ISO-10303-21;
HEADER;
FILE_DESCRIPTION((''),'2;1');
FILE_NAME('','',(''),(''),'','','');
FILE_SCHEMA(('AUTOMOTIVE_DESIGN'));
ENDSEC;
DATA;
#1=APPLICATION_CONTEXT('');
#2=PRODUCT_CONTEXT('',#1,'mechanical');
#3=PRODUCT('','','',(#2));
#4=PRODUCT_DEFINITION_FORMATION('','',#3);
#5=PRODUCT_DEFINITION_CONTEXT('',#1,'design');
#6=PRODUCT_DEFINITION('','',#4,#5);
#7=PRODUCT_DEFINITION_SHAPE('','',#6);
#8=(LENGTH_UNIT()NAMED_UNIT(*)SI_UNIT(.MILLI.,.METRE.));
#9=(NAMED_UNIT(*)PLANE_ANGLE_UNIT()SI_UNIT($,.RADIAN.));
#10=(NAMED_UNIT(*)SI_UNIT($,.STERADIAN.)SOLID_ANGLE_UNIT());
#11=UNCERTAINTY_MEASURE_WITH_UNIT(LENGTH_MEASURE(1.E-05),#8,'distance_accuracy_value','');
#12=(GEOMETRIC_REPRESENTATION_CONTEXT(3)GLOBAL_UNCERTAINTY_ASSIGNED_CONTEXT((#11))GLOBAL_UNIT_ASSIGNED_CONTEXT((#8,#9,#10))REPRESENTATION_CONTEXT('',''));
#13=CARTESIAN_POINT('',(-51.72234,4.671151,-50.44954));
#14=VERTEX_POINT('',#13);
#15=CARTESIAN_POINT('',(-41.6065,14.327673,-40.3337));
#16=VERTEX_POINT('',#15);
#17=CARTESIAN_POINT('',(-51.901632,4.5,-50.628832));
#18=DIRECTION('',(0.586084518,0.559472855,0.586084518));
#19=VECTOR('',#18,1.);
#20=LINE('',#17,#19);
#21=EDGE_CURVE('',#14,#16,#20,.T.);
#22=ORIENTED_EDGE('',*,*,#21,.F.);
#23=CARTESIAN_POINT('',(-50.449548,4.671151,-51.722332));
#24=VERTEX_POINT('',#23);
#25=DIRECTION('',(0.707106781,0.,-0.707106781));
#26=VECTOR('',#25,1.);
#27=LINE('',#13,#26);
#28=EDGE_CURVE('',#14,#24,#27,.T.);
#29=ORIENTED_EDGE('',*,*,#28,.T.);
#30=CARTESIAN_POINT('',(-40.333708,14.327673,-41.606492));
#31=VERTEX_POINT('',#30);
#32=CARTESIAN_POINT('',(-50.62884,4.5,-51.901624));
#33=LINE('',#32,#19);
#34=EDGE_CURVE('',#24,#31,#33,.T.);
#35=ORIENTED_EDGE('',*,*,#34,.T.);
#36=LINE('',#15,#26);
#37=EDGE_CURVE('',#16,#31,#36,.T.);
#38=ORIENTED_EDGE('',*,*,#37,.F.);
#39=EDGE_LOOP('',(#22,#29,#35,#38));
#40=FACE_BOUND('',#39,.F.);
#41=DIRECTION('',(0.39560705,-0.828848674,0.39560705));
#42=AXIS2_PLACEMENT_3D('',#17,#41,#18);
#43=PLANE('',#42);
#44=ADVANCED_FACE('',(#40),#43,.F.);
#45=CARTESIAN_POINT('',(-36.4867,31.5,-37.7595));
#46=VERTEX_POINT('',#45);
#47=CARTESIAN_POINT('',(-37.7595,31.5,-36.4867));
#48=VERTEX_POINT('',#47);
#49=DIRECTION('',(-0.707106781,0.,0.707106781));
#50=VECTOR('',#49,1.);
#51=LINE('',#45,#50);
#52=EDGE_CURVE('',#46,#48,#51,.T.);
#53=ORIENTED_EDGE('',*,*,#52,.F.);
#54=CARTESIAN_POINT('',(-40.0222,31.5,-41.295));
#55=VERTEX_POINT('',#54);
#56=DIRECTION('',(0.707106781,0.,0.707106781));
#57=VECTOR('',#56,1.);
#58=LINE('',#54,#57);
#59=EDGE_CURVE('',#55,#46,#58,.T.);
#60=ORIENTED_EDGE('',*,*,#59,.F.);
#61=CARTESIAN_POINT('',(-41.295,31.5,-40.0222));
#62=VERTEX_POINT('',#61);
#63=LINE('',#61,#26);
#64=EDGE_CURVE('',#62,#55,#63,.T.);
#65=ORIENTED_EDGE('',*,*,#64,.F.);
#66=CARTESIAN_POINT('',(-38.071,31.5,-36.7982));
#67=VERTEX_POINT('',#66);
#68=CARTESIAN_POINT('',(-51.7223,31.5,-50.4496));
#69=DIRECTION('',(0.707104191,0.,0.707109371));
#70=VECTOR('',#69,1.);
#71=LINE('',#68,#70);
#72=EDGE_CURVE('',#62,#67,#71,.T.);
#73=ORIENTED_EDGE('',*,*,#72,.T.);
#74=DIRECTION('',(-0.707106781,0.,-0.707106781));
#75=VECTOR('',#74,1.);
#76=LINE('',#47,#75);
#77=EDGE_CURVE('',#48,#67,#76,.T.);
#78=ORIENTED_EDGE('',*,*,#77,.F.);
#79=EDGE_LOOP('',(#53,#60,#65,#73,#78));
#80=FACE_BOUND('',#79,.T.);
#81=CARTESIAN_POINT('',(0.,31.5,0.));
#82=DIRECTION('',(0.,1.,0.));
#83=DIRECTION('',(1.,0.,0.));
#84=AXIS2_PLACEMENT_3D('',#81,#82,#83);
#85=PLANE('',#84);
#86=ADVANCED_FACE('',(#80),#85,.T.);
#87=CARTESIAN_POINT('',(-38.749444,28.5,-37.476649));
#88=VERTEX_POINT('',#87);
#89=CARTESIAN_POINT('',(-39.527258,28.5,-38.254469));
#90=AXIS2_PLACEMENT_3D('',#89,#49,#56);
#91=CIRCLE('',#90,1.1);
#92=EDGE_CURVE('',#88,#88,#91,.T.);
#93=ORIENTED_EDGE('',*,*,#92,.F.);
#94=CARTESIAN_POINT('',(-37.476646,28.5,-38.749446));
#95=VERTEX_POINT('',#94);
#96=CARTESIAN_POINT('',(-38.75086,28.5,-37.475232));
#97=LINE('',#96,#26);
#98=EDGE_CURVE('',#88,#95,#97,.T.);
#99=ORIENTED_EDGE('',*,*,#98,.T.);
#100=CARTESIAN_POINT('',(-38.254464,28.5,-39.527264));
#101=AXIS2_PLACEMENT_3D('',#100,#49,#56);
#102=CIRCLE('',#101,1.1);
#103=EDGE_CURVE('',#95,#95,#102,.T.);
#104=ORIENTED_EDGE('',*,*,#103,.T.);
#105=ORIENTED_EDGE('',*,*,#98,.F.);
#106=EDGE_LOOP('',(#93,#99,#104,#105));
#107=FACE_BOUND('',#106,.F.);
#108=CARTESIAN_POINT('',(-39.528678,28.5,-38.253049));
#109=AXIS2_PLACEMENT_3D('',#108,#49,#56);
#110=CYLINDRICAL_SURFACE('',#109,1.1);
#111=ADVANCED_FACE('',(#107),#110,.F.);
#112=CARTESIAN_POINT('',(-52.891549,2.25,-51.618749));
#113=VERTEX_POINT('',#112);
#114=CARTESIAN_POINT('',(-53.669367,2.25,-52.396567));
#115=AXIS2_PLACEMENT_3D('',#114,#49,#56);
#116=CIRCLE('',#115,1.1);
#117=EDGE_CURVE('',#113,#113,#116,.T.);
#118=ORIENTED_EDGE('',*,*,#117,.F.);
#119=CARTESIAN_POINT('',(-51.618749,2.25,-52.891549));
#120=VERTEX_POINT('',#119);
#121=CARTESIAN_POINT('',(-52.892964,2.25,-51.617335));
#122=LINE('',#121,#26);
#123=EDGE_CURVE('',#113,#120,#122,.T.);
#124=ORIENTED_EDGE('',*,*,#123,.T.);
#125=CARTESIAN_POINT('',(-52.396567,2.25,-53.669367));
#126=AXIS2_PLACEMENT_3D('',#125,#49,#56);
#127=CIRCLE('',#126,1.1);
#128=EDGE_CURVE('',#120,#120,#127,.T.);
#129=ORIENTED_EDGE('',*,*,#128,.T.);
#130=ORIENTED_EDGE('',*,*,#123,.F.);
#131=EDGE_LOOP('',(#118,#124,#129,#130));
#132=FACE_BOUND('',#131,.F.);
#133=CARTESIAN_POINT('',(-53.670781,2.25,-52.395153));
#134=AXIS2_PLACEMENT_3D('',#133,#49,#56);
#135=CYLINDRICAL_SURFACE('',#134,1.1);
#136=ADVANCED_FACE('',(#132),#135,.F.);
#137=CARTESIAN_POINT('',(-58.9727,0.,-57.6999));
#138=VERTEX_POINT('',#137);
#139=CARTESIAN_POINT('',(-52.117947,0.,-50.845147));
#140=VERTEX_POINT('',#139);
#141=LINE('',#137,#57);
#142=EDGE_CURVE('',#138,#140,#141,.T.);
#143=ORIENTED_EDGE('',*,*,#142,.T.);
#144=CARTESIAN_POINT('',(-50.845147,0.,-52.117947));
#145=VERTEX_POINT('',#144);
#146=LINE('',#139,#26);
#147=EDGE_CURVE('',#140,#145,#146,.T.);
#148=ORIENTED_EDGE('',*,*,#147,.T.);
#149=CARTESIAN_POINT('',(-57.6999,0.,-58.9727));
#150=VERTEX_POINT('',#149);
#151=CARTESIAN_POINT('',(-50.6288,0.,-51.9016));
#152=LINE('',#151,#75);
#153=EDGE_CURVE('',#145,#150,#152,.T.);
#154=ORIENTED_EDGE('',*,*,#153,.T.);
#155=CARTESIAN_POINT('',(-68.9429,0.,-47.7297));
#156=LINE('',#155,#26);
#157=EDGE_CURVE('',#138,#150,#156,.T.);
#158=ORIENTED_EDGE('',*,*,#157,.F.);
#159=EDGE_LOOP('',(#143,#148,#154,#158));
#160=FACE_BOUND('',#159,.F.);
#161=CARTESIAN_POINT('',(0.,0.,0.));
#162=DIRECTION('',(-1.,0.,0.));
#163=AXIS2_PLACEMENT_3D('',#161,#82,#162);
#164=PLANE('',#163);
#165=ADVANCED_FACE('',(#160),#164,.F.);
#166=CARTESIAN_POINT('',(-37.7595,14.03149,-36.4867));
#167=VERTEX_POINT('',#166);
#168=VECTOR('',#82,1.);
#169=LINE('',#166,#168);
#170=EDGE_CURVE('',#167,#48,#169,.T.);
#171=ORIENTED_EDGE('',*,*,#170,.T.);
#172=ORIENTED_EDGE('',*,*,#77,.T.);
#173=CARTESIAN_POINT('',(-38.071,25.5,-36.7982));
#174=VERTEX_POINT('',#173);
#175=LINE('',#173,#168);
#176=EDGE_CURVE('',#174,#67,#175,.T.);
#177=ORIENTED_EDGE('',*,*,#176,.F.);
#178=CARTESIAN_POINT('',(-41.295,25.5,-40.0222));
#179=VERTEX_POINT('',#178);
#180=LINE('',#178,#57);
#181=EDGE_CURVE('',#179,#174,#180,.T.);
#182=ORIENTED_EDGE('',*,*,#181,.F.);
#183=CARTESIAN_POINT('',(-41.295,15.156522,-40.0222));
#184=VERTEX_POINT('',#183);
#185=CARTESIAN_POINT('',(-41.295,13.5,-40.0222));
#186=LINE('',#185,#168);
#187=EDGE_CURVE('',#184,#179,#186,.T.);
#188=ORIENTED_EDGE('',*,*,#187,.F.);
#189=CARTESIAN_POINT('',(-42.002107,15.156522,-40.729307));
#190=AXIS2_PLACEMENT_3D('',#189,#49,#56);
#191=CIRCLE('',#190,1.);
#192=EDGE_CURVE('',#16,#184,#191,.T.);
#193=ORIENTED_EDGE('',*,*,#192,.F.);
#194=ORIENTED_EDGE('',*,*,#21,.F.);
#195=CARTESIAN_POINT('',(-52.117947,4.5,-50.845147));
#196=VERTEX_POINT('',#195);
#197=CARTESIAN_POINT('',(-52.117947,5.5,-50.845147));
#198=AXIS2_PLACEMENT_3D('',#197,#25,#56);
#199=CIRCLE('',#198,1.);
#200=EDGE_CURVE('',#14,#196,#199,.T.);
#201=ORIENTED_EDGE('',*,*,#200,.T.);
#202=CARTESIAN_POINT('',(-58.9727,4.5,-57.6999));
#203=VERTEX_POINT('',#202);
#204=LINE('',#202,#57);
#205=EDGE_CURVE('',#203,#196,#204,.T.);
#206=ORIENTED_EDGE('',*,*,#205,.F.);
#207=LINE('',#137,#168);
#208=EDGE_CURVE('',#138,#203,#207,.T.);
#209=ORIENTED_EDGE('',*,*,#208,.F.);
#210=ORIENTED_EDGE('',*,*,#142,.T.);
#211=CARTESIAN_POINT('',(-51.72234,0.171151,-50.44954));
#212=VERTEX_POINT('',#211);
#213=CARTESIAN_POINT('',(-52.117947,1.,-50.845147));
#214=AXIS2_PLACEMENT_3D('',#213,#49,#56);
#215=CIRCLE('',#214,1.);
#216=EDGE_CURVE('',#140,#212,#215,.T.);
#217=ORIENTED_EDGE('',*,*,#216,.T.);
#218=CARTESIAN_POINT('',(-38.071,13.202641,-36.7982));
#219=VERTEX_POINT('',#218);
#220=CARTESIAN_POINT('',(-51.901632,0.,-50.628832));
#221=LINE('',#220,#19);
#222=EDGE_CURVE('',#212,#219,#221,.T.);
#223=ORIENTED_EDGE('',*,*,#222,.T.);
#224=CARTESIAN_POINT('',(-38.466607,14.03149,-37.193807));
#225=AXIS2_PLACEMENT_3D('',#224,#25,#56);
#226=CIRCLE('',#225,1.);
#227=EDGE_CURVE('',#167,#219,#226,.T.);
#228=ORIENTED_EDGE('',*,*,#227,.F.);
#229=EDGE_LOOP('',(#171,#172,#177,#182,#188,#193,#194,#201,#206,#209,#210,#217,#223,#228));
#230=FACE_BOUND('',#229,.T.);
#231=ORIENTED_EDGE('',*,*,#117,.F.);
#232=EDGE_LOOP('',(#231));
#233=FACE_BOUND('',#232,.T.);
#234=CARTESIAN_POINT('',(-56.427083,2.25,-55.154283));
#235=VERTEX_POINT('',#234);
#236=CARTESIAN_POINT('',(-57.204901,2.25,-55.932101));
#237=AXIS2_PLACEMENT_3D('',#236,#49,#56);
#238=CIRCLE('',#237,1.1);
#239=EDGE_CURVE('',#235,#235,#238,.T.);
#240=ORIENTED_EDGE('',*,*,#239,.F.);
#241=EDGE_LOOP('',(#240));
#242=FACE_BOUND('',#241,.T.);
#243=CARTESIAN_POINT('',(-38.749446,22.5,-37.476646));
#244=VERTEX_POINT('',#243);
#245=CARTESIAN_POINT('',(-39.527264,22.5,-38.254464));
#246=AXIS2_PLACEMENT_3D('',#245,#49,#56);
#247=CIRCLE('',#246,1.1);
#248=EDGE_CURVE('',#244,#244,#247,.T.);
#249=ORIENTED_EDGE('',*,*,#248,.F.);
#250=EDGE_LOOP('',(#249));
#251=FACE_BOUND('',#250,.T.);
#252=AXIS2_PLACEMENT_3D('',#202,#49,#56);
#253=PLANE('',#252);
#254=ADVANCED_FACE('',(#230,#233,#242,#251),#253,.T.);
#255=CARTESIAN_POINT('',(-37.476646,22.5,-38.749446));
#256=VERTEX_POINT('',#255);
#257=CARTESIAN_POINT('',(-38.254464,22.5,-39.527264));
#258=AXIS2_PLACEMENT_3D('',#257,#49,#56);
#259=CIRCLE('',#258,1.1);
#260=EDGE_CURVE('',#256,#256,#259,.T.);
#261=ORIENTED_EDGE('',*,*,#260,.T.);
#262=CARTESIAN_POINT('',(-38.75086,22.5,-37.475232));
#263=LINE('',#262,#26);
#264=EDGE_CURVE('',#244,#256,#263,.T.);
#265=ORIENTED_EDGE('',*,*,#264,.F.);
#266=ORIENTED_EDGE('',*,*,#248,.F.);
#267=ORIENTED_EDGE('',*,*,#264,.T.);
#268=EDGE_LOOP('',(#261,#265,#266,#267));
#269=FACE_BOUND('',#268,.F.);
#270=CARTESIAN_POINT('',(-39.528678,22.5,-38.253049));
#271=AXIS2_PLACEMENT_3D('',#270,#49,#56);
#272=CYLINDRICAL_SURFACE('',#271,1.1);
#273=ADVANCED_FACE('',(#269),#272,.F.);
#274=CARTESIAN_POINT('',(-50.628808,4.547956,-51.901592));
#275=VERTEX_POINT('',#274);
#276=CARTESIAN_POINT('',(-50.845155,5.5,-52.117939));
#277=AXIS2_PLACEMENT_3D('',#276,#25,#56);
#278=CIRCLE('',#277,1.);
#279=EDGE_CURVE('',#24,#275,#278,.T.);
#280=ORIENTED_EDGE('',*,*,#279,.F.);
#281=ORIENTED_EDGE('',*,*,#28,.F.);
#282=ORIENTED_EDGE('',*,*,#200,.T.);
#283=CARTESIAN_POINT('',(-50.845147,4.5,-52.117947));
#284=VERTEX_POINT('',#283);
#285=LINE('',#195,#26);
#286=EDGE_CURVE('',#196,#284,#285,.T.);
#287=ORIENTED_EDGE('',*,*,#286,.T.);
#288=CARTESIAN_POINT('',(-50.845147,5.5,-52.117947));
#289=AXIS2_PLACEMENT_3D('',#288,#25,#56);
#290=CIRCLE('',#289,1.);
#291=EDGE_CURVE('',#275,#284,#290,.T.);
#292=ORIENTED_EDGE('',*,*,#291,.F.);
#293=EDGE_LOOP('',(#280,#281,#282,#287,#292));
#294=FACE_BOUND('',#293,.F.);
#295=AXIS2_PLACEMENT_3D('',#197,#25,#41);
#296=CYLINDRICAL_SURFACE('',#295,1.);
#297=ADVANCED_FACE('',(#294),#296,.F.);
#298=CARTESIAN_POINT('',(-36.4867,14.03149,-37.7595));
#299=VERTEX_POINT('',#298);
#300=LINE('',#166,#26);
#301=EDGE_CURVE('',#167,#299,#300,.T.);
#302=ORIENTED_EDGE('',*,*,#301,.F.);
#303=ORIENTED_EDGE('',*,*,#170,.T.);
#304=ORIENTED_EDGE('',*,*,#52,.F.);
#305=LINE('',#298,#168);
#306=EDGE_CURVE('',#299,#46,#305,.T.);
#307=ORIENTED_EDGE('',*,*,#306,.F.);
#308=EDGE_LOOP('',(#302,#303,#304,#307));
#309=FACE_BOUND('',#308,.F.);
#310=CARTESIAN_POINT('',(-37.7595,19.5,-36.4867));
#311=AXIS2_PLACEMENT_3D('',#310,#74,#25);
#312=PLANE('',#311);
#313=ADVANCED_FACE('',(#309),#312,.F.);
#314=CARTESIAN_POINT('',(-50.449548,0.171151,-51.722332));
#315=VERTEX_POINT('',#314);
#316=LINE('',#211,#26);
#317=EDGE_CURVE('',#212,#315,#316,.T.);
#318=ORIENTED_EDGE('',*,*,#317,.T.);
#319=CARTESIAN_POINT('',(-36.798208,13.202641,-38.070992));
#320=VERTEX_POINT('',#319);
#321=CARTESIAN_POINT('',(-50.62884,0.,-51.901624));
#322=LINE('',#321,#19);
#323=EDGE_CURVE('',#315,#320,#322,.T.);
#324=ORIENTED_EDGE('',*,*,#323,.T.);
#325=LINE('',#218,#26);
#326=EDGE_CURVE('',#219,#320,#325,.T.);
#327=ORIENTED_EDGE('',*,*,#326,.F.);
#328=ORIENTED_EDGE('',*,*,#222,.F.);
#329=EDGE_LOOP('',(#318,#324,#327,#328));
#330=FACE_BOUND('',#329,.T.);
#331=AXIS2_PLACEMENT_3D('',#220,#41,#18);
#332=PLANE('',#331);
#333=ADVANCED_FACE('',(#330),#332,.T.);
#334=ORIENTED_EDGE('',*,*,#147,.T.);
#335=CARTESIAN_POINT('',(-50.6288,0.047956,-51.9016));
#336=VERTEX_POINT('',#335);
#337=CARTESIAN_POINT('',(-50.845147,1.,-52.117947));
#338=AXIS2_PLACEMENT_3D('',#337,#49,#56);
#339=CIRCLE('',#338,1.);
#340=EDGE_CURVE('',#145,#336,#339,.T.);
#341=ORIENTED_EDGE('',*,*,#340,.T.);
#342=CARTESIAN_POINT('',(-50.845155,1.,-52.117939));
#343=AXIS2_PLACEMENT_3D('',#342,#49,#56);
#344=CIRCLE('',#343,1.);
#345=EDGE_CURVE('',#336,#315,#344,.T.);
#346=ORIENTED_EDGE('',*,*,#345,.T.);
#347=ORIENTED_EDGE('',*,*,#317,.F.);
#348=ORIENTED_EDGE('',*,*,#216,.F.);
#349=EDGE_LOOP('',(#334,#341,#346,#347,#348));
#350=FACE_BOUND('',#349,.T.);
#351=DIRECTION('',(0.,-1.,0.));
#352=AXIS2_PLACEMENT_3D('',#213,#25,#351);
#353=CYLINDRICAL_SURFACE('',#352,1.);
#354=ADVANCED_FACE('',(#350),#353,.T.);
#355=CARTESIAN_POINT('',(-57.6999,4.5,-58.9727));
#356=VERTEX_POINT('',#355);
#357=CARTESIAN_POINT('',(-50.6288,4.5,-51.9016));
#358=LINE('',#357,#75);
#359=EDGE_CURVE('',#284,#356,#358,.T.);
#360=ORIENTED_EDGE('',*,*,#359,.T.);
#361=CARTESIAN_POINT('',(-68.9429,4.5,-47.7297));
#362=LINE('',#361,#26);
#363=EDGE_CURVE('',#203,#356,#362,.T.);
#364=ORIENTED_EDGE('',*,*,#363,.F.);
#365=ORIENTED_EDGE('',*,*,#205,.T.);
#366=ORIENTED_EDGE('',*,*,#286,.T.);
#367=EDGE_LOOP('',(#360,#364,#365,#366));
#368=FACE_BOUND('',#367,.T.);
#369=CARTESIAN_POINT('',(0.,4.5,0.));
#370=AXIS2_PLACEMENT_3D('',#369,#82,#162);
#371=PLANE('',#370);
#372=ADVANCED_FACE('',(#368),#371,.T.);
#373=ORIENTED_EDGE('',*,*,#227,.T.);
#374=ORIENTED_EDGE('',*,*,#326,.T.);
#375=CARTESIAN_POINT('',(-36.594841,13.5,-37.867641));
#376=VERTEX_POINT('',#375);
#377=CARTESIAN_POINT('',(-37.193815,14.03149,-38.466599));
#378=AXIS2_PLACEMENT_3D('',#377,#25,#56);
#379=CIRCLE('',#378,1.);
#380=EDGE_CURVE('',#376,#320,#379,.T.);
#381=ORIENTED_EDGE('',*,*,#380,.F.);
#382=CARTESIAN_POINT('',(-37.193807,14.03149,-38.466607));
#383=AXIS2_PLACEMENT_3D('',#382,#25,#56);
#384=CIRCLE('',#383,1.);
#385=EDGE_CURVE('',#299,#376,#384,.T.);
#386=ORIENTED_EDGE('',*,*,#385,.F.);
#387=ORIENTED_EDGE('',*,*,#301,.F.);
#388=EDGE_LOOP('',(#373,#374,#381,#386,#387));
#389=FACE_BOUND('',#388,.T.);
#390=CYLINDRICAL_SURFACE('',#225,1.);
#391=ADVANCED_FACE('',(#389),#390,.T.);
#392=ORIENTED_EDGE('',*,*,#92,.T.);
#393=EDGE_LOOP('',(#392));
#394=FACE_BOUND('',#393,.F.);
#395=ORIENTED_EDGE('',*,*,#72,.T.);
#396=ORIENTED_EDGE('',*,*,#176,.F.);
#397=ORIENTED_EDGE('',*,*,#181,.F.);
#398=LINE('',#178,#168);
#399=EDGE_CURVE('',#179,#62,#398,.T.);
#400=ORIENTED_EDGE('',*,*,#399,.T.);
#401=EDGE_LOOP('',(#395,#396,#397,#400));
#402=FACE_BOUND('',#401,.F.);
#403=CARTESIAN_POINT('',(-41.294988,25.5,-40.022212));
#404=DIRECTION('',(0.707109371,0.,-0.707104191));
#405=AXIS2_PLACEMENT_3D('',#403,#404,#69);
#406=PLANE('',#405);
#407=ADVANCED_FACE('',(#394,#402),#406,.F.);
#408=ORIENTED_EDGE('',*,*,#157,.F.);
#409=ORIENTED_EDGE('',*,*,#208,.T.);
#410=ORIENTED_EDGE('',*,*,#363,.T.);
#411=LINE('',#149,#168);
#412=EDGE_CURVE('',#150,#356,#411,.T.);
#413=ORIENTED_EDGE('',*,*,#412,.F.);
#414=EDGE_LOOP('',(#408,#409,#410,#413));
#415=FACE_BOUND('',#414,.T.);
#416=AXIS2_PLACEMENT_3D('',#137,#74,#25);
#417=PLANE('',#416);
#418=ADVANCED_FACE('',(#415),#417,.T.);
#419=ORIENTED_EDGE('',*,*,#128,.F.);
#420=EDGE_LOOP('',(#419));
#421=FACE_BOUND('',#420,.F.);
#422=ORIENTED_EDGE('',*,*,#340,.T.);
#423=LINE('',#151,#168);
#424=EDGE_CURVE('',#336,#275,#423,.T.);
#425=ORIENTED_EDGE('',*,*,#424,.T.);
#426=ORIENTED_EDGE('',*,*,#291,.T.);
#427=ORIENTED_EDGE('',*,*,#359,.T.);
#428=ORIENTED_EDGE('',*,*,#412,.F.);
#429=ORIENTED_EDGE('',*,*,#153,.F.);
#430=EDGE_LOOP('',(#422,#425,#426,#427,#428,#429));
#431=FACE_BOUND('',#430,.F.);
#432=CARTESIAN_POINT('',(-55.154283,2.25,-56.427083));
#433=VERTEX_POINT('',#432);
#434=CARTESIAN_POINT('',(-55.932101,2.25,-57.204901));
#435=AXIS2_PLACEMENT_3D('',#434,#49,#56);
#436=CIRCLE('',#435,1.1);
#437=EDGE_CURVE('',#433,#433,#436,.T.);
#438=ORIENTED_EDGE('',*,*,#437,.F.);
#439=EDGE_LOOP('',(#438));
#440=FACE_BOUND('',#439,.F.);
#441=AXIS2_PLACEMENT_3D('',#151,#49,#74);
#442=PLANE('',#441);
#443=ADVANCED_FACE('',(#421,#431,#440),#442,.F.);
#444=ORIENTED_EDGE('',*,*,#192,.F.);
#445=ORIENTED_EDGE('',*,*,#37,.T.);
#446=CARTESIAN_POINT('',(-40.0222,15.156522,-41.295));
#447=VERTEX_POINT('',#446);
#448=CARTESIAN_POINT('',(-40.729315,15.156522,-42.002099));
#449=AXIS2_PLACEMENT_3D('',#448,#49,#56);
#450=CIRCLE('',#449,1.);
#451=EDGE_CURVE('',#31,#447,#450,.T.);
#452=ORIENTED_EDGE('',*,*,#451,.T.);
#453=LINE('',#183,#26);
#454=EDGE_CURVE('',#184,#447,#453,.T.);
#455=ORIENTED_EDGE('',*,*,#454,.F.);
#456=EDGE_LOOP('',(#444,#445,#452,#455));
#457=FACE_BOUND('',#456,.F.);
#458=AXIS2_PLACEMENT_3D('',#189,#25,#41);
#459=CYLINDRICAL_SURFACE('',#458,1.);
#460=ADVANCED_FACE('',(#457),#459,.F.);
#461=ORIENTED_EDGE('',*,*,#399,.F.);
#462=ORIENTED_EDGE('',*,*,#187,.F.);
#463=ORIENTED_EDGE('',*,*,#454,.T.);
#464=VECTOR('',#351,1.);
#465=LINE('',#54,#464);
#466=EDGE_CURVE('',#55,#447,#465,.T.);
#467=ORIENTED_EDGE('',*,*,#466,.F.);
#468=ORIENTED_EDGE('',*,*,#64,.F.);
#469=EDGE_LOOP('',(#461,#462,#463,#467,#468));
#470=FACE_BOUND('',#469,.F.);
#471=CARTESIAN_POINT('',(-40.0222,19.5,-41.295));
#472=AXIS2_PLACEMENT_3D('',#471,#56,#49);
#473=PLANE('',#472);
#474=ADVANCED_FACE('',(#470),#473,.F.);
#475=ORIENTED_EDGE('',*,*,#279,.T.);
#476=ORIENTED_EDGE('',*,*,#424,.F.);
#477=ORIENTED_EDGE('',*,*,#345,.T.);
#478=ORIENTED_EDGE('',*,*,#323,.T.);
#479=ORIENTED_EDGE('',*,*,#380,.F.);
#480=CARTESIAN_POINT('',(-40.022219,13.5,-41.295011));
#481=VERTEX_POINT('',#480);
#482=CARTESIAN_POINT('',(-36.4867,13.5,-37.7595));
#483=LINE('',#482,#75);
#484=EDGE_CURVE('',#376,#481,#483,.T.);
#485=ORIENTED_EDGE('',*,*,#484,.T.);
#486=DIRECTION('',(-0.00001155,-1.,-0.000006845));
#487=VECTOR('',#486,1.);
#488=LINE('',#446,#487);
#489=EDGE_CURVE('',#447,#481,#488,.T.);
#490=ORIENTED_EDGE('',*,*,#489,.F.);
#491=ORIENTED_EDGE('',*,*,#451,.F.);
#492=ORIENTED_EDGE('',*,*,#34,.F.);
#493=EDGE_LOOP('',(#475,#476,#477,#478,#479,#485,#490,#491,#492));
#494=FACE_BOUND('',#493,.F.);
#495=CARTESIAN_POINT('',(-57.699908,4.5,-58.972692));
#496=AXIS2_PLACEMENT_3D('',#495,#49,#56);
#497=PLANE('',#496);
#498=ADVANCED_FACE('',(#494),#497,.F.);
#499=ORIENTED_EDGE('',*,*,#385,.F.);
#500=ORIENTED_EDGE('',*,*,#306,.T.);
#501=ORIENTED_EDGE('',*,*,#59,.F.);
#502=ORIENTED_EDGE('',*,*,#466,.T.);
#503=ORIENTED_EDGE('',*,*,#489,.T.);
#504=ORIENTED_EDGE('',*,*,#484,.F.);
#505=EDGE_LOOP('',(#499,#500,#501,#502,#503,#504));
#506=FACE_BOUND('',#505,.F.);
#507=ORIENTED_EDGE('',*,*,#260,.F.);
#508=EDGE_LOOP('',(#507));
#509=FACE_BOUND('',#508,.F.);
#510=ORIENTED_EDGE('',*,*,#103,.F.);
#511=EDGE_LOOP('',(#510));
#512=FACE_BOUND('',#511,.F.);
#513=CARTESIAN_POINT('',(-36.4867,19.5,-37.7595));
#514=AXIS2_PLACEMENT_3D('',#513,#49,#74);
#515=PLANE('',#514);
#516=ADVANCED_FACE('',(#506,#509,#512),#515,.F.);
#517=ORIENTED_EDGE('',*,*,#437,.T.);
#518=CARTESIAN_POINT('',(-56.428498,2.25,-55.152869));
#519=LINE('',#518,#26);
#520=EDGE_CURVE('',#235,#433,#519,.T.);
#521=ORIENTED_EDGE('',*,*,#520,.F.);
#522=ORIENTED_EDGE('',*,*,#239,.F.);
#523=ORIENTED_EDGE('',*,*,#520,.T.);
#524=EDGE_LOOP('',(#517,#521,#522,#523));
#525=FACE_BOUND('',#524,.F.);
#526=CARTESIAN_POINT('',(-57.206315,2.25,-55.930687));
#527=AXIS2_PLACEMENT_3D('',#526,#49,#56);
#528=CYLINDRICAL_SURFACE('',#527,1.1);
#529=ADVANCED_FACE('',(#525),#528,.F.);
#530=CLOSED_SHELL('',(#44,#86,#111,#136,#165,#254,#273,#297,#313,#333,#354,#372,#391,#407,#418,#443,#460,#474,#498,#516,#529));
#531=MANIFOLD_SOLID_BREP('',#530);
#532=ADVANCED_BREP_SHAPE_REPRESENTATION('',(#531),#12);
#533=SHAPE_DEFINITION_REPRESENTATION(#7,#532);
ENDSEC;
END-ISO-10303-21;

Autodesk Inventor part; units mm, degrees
ref_plane "YZ Plane" through (0, 0, 0) normal (1, 0, 0) x (0, 1, 0)
sketch "Sketch3" plane through (0, 0, 0) normal (0, 1, 0) x (-1, 0, 0)
  circle A0 centre (0, 0) radius 110 construction
  arc A1 (43.0581, -98.5) -> (-43.0581, -98.5) centre (0, 0) ccw
  line L0 (0, -107.5) -> (0, -98.5) construction
  line L1 (0, -98.5) -> (0, -73.5) construction
  line L2 (0, -98.5) -> (-43.0581, -98.5) construction
  line L3 (0, -98.5) -> (43.0581, -98.5) construction
  line L4 (43.0581, -98.5) -> (-43.0581, -98.5) construction
  line L5 (-18.0581, -73.5) -> (18.0581, -73.5)
  arc A2 (43.0581, -98.5) -> (18.0581, -73.5) centre (18.0581, -98.5) ccw
  arc A3 (-18.0581, -73.5) -> (-43.0581, -98.5) centre (-18.0581, -98.5) ccw
  line L6 (0, 107.5) -> (0, 97.5) construction
  line L7 (0, 97.5) -> (-22.5, 97.5) construction
  line L8 (-22.5, 97.5) -> (-22.5, 82.5) construction
  line L9 (22.5, 82.5) -> (22.5, 97.5) construction
  line L10 (22.5, 90) -> (-22.5, 90) construction
  line L11 (15, 97.5) -> (-15, 97.5)
  line L12 (-15, 82.5) -> (15, 82.5)
  arc A4 (15, 82.5) -> (15, 97.5) centre (15, 90) ccw
  arc A5 (-15, 97.5) -> (-15, 82.5) centre (-15, 90) ccw
  line L13 (22.5, 82.5) -> (17.5, 82.5) construction
  line L14 (17.5, 82.5) -> (17.5, 77.5) construction
  circle A6 centre (17.5, 77.5) radius 1.6
  circle A7 centre (-17.5, 77.5) radius 1.6
  line L15 (-58.3363, 79.5495) -> (-79.5495, 58.3363)
  arc A8 (-47.7297, 68.9429) -> (-58.3363, 79.5495) centre (-53.033, 74.2462) ccw
  arc A9 (-79.5495, 58.3363) -> (-68.9429, 47.7297) centre (-74.2462, 53.033) ccw
  line L16 (-68.9429, 47.7297) -> (-47.7297, 68.9429)
  circle A10 centre (-67.1751, 42.4264) radius 1.6
  circle A11 centre (-42.4264, 67.1751) radius 1.6
  line L17 (-97.5, 15) -> (-97.5, -15)
  arc A12 (-82.5, 15) -> (-97.5, 15) centre (-90, 15) ccw
  arc A13 (-97.5, -15) -> (-82.5, -15) centre (-90, -15) ccw
  line L18 (-82.5, -15) -> (-82.5, 15)
  circle A14 centre (-77.5, -17.5) radius 1.6
  circle A15 centre (-77.5, 17.5) radius 1.6
  line L19 (-79.5495, -58.3363) -> (-58.3363, -79.5495)
  arc A16 (-68.9429, -47.7297) -> (-79.5495, -58.3363) centre (-74.2462, -53.033) ccw
  arc A17 (-58.3363, -79.5495) -> (-47.7297, -68.9429) centre (-53.033, -74.2462) ccw
  line L20 (-47.7297, -68.9429) -> (-68.9429, -47.7297)
  circle A18 centre (-42.4264, -67.1751) radius 1.6
  circle A19 centre (-67.1751, -42.4264) radius 1.6
  line L21 (-15, -97.5) -> (15, -97.5)
  arc A20 (-15, -82.5) -> (-15, -97.5) centre (-15, -90) ccw
  arc A21 (15, -97.5) -> (15, -82.5) centre (15, -90) ccw
  line L22 (15, -82.5) -> (-15, -82.5)
  circle A22 centre (17.5, -77.5) radius 1.6
  circle A23 centre (-17.5, -77.5) radius 1.6
  line L23 (58.3363, -79.5495) -> (79.5495, -58.3363)
  arc A24 (47.7297, -68.9429) -> (58.3363, -79.5495) centre (53.033, -74.2462) ccw
  arc A25 (79.5495, -58.3363) -> (68.9429, -47.7297) centre (74.2462, -53.033) ccw
  line L24 (68.9429, -47.7297) -> (47.7297, -68.9429)
  circle A26 centre (67.1751, -42.4264) radius 1.6
  circle A27 centre (42.4264, -67.1751) radius 1.6
  line L25 (97.5, -15) -> (97.5, 15)
  arc A28 (82.5, -15) -> (97.5, -15) centre (90, -15) ccw
  arc A29 (97.5, 15) -> (82.5, 15) centre (90, 15) ccw
  line L26 (82.5, 15) -> (82.5, -15)
  circle A30 centre (77.5, 17.5) radius 1.6
  circle A31 centre (77.5, -17.5) radius 1.6
  line L27 (79.5495, 58.3363) -> (58.3363, 79.5495)
  arc A32 (68.9429, 47.7297) -> (79.5495, 58.3363) centre (74.2462, 53.033) ccw
  arc A33 (58.3363, 79.5495) -> (47.7297, 68.9429) centre (53.033, 74.2462) ccw
  line L28 (47.7297, 68.9429) -> (68.9429, 47.7297)
  circle A34 centre (42.4264, 67.1751) radius 1.6
  circle A35 centre (67.1751, 42.4264) radius 1.6
  circle A36 centre (0, 0) radius 110 construction
  arc A37 (43.0581, -98.5) -> (-43.0581, -98.5) centre (0, 0) ccw
  line L29 (0, -107.5) -> (0, -98.5) construction
  line L30 (0, -98.5) -> (0, -73.5) construction
  line L31 (0, -98.5) -> (-43.0581, -98.5) construction
  line L32 (0, -98.5) -> (43.0581, -98.5) construction
  line L33 (43.0581, -98.5) -> (-43.0581, -98.5) construction
  line L34 (-18.0581, -73.5) -> (18.0581, -73.5)
  arc A38 (43.0581, -98.5) -> (18.0581, -73.5) centre (18.0581, -98.5) ccw
  arc A39 (-18.0581, -73.5) -> (-43.0581, -98.5) centre (-18.0581, -98.5) ccw
  line L35 (0, 107.5) -> (0, 97.5) construction
  line L36 (0, 97.5) -> (-22.5, 97.5) construction
  line L37 (-22.5, 97.5) -> (-22.5, 82.5) construction
  line L38 (22.5, 82.5) -> (22.5, 97.5) construction
  line L39 (22.5, 90) -> (-22.5, 90) construction
  line L40 (15, 97.5) -> (-15, 97.5)
  line L41 (-15, 82.5) -> (15, 82.5)
  arc A40 (15, 82.5) -> (15, 97.5) centre (15, 90) ccw
  arc A41 (-15, 97.5) -> (-15, 82.5) centre (-15, 90) ccw
  line L42 (22.5, 82.5) -> (17.5, 82.5) construction
  line L43 (17.5, 82.5) -> (17.5, 77.5) construction
  circle A42 centre (17.5, 77.5) radius 1.6
  circle A43 centre (-17.5, 77.5) radius 1.6
  line L44 (-58.3363, 79.5495) -> (-79.5495, 58.3363)
  arc A44 (-47.7297, 68.9429) -> (-58.3363, 79.5495) centre (-53.033, 74.2462) ccw
  arc A45 (-79.5495, 58.3363) -> (-68.9429, 47.7297) centre (-74.2462, 53.033) ccw
  line L45 (-68.9429, 47.7297) -> (-47.7297, 68.9429)
  circle A46 centre (-67.1751, 42.4264) radius 1.6
  circle A47 centre (-42.4264, 67.1751) radius 1.6
  line L46 (-97.5, 15) -> (-97.5, -15)
  arc A48 (-82.5, 15) -> (-97.5, 15) centre (-90, 15) ccw
  arc A49 (-97.5, -15) -> (-82.5, -15) centre (-90, -15) ccw
  line L47 (-82.5, -15) -> (-82.5, 15)
  circle A50 centre (-77.5, -17.5) radius 1.6
  circle A51 centre (-77.5, 17.5) radius 1.6
  line L48 (-79.5495, -58.3363) -> (-58.3363, -79.5495)
  arc A52 (-68.9429, -47.7297) -> (-79.5495, -58.3363) centre (-74.2462, -53.033) ccw
  arc A53 (-58.3363, -79.5495) -> (-47.7297, -68.9429) centre (-53.033, -74.2462) ccw
  line L49 (-47.7297, -68.9429) -> (-68.9429, -47.7297)
  circle A54 centre (-42.4264, -67.1751) radius 1.6
  circle A55 centre (-67.1751, -42.4264) radius 1.6
  line L50 (-15, -97.5) -> (15, -97.5)
  arc A56 (-15, -82.5) -> (-15, -97.5) centre (-15, -90) ccw
  arc A57 (15, -97.5) -> (15, -82.5) centre (15, -90) ccw
  line L51 (15, -82.5) -> (-15, -82.5)
  circle A58 centre (17.5, -77.5) radius 1.6
  circle A59 centre (-17.5, -77.5) radius 1.6
  line L52 (58.3363, -79.5495) -> (79.5495, -58.3363)
  arc A60 (47.7297, -68.9429) -> (58.3363, -79.5495) centre (53.033, -74.2462) ccw
  arc A61 (79.5495, -58.3363) -> (68.9429, -47.7297) centre (74.2462, -53.033) ccw
  line L53 (68.9429, -47.7297) -> (47.7297, -68.9429)
  circle A62 centre (67.1751, -42.4264) radius 1.6
  circle A63 centre (42.4264, -67.1751) radius 1.6
  line L54 (97.5, -15) -> (97.5, 15)
  arc A64 (82.5, -15) -> (97.5, -15) centre (90, -15) ccw
  arc A65 (97.5, 15) -> (82.5, 15) centre (90, 15) ccw
  line L55 (82.5, 15) -> (82.5, -15)
  circle A66 centre (77.5, 17.5) radius 1.6
  circle A67 centre (77.5, -17.5) radius 1.6
  line L56 (79.5495, 58.3363) -> (58.3363, 79.5495)
  arc A68 (68.9429, 47.7297) -> (79.5495, 58.3363) centre (74.2462, 53.033) ccw
  arc A69 (58.3363, 79.5495) -> (47.7297, 68.9429) centre (53.033, 74.2462) ccw
  line L57 (47.7297, 68.9429) -> (68.9429, 47.7297)
  circle A70 centre (42.4264, 67.1751) radius 1.6
  circle A71 centre (67.1751, 42.4264) radius 1.6
  line L58 (67.1751, -42.4264) -> (54.8008, -54.8008) construction
  line L59 (54.8008, -54.8008) -> (53.3866, -56.215) construction
  line L60 (53.3866, -56.215) -> (52.3259, -57.2756) construction
  line L61 (47.7297, -54.8008) -> (54.8008, -61.8718)
  line L62 (54.8008, -61.8718) -> (56.9221, -59.7505)
  line L63 (56.9221, -59.7505) -> (49.851, -52.6795)
  line L64 (49.851, -52.6795) -> (47.7297, -54.8008)
  line L65 (47.7297, -54.8008) -> (56.9221, -59.7505) construction
  line L66 (54.8008, -61.8718) -> (49.851, -52.6795) construction
  line L67 (54.8008, -54.8008) -> (53.7401, -53.7401) construction
  line L68 (59.7505, -56.9221) -> (52.6795, -49.851)
  line L69 (54.8008, -47.7297) -> (61.8718, -54.8008)
  line L70 (52.6795, -49.851) -> (54.8008, -47.7297)
  line L71 (58.9727, -57.6999) -> (51.9016, -50.6288)
  line L72 (51.9016, -50.6288) -> (50.6288, -51.9016)
  line L73 (50.6288, -51.9016) -> (57.6999, -58.9727)
  line L74 (57.6999, -58.9727) -> (58.9727, -57.6999)
  line L75 (58.9727, -57.6999) -> (50.6288, -51.9016) construction
  line L76 (51.9016, -50.6288) -> (57.6999, -58.9727) construction
  point P0 (0, 90)
  point P1 (-45.9619, 70.7107)
  point P2 (-82.5, 17.5)
  point P3 (-70.7107, -45.9619)
  point P4 (-17.5, -82.5)
  point P5 (45.9619, -70.7107)
  point P6 (82.5, -17.5)
  point P7 (70.7107, 45.9619)
  point P8 (0, 90)
  point P9 (-45.9619, 70.7107)
  point P10 (-82.5, 17.5)
  point P11 (-70.7107, -45.9619)
  point P12 (-17.5, -82.5)
  point P13 (45.9619, -70.7107)
  point P14 (82.5, -17.5)
  point P15 (70.7107, 45.9619)
  point P16 (45.4935, 0)
  point P17 (26.7551, 33.8262)
  point P18 (-26.7551, 33.8262)
  point P19 (-33.8262, 26.7551)
  point P20 (-33.8262, -26.7551)
  point P21 (-26.7551, -33.8262)
  point P22 (26.7551, -33.8262)
  point P23 (33.8262, -26.7551)
  point P24 (33.8262, 26.7551)
  dimension "d9" = 220
  dimension "d10" = 215
  dimension "d11" = 9
  dimension "d12" = 25
  dimension "d13" = 10
  dimension "d14" = 22.5
  dimension "d15" = 15
  dimension "d16" = 45
  dimension "d17" = 5
  dimension "d18" = 5
  dimension "d19" = 3.2
  dimension "d20" = 86.1162
  dimension "d21" = 45
  dimension "d22" = 360
  dimension "d23" = 220
  dimension "d24" = 215
  dimension "d25" = 9
  dimension "d26" = 25
  dimension "d27" = 10
  dimension "d28" = 22.5
  dimension "d29" = 15
  dimension "d30" = 45
  dimension "d31" = 5
  dimension "d32" = 5
  dimension "d33" = 3.2
  dimension "d34" = 86.1162
  dimension "d35" = 45
  dimension "d36" = 360
  dimension "d37" = 17.5
  dimension "d38" = 2
  dimension "d39" = 1.5
  dimension "d40" = 1.8
extrude "Extrusion2" add sketch "Sketch3" along normal blind 4.5 contours L73 L72 L71 L24
sketch "Sketch4" plane through (-51.9016, 0, -50.6288) normal (-0.7071068, 0, 0.7071068) x (0.7071068, 0, 0.7071068)
  line L0 (0, 4.5) -> (-10, 4.5) construction
  line L1 (0, 0) -> (-10, 0) construction
  line L2 (-10, 4.5) -> (0, 0) construction
  line L3 (-5, 2.25) -> (-7.5, 2.25) construction
  line L4 (-10, 0) -> (-10, 4.5) construction
  line L5 (-5, 2.25) -> (-5, 3.2445) construction
  circle A0 centre (-7.5, 2.25) radius 1.1
  circle A1 centre (-2.5, 2.25) radius 1.1
  point P0 (72.5, 0)
  dimension "d43" = 2.5
  dimension "d44" = 2.2
extrude "Extrusion3" cut sketch "Sketch4" against normal blind 4.5
ref_plane "Work Plane2" through (0, 19.5, 0) normal (0, 1, 0) x (1, 0, 0)
sketch "Sketch5" plane through (0, 19.5, 0) normal (0, 1, 0) x (1, 0, 0)
  circle A0 centre (0, 0) radius 110 construction
  arc A1 (43.0581, -98.5) -> (-43.0581, -98.5) centre (0, 0) ccw
  line L0 (0, -107.5) -> (0, -98.5) construction
  line L1 (0, -98.5) -> (0, -73.5) construction
  line L2 (0, -98.5) -> (-43.0581, -98.5) construction
  line L3 (0, -98.5) -> (43.0581, -98.5) construction
  line L4 (43.0581, -98.5) -> (-43.0581, -98.5) construction
  line L5 (-18.0581, -73.5) -> (18.0581, -73.5)
  arc A2 (43.0581, -98.5) -> (18.0581, -73.5) centre (18.0581, -98.5) ccw
  arc A3 (-18.0581, -73.5) -> (-43.0581, -98.5) centre (-18.0581, -98.5) ccw
  line L6 (0, 107.5) -> (0, 97.5) construction
  line L7 (0, 97.5) -> (-22.5, 97.5) construction
  line L8 (-22.5, 97.5) -> (-22.5, 82.5) construction
  line L9 (22.5, 82.5) -> (22.5, 97.5) construction
  line L10 (22.5, 90) -> (-22.5, 90) construction
  line L11 (15, 97.5) -> (-15, 97.5)
  line L12 (-15, 82.5) -> (15, 82.5)
  arc A4 (15, 82.5) -> (15, 97.5) centre (15, 90) ccw
  arc A5 (-15, 97.5) -> (-15, 82.5) centre (-15, 90) ccw
  line L13 (22.5, 82.5) -> (17.5, 82.5) construction
  line L14 (17.5, 82.5) -> (17.5, 77.5) construction
  circle A6 centre (17.5, 77.5) radius 1.6
  circle A7 centre (-17.5, 77.5) radius 1.6
  line L15 (-58.3363, 79.5495) -> (-79.5495, 58.3363)
  arc A8 (-47.7297, 68.9429) -> (-58.3363, 79.5495) centre (-53.033, 74.2462) ccw
  arc A9 (-79.5495, 58.3363) -> (-68.9429, 47.7297) centre (-74.2462, 53.033) ccw
  line L16 (-68.9429, 47.7297) -> (-47.7297, 68.9429)
  circle A10 centre (-67.1751, 42.4264) radius 1.6
  circle A11 centre (-42.4264, 67.1751) radius 1.6
  line L17 (-97.5, 15) -> (-97.5, -15)
  arc A12 (-82.5, 15) -> (-97.5, 15) centre (-90, 15) ccw
  arc A13 (-97.5, -15) -> (-82.5, -15) centre (-90, -15) ccw
  line L18 (-82.5, -15) -> (-82.5, 15)
  circle A14 centre (-77.5, -17.5) radius 1.6
  circle A15 centre (-77.5, 17.5) radius 1.6
  line L19 (-79.5495, -58.3363) -> (-58.3363, -79.5495)
  arc A16 (-68.9429, -47.7297) -> (-79.5495, -58.3363) centre (-74.2462, -53.033) ccw
  arc A17 (-58.3363, -79.5495) -> (-47.7297, -68.9429) centre (-53.033, -74.2462) ccw
  line L20 (-47.7297, -68.9429) -> (-68.9429, -47.7297)
  circle A18 centre (-42.4264, -67.1751) radius 1.6
  circle A19 centre (-67.1751, -42.4264) radius 1.6
  line L21 (-15, -97.5) -> (15, -97.5)
  arc A20 (-15, -82.5) -> (-15, -97.5) centre (-15, -90) ccw
  arc A21 (15, -97.5) -> (15, -82.5) centre (15, -90) ccw
  line L22 (15, -82.5) -> (-15, -82.5)
  circle A22 centre (17.5, -77.5) radius 1.6
  circle A23 centre (-17.5, -77.5) radius 1.6
  line L23 (58.3363, -79.5495) -> (79.5495, -58.3363)
  arc A24 (47.7297, -68.9429) -> (58.3363, -79.5495) centre (53.033, -74.2462) ccw
  arc A25 (79.5495, -58.3363) -> (68.9429, -47.7297) centre (74.2462, -53.033) ccw
  line L24 (68.9429, -47.7297) -> (47.7297, -68.9429)
  circle A26 centre (67.1751, -42.4264) radius 1.6
  circle A27 centre (42.4264, -67.1751) radius 1.6
  line L25 (97.5, -15) -> (97.5, 15)
  arc A28 (82.5, -15) -> (97.5, -15) centre (90, -15) ccw
  arc A29 (97.5, 15) -> (82.5, 15) centre (90, 15) ccw
  line L26 (82.5, 15) -> (82.5, -15)
  circle A30 centre (77.5, 17.5) radius 1.6
  circle A31 centre (77.5, -17.5) radius 1.6
  line L27 (79.5495, 58.3363) -> (58.3363, 79.5495)
  arc A32 (68.9429, 47.7297) -> (79.5495, 58.3363) centre (74.2462, 53.033) ccw
  arc A33 (58.3363, 79.5495) -> (47.7297, 68.9429) centre (53.033, 74.2462) ccw
  line L28 (47.7297, 68.9429) -> (68.9429, 47.7297)
  circle A34 centre (42.4264, 67.1751) radius 1.6
  circle A35 centre (67.1751, 42.4264) radius 1.6
  circle A36 centre (0, 0) radius 110 construction
  arc A37 (43.0581, -98.5) -> (-43.0581, -98.5) centre (0, 0) ccw
  line L29 (0, -107.5) -> (0, -98.5) construction
  line L30 (0, -98.5) -> (0, -73.5) construction
  line L31 (0, -98.5) -> (-43.0581, -98.5) construction
  line L32 (0, -98.5) -> (43.0581, -98.5) construction
  line L33 (43.0581, -98.5) -> (-43.0581, -98.5) construction
  line L34 (-18.0581, -73.5) -> (18.0581, -73.5)
  arc A38 (43.0581, -98.5) -> (18.0581, -73.5) centre (18.0581, -98.5) ccw
  arc A39 (-18.0581, -73.5) -> (-43.0581, -98.5) centre (-18.0581, -98.5) ccw
  line L35 (0, 107.5) -> (0, 97.5) construction
  line L36 (0, 97.5) -> (-22.5, 97.5) construction
  line L37 (-22.5, 97.5) -> (-22.5, 82.5) construction
  line L38 (22.5, 82.5) -> (22.5, 97.5) construction
  line L39 (22.5, 90) -> (-22.5, 90) construction
  line L40 (15, 97.5) -> (-15, 97.5)
  line L41 (-15, 82.5) -> (15, 82.5)
  arc A40 (15, 82.5) -> (15, 97.5) centre (15, 90) ccw
  arc A41 (-15, 97.5) -> (-15, 82.5) centre (-15, 90) ccw
  line L42 (22.5, 82.5) -> (17.5, 82.5) construction
  line L43 (17.5, 82.5) -> (17.5, 77.5) construction
  circle A42 centre (17.5, 77.5) radius 1.6
  circle A43 centre (-17.5, 77.5) radius 1.6
  line L44 (-58.3363, 79.5495) -> (-79.5495, 58.3363)
  arc A44 (-47.7297, 68.9429) -> (-58.3363, 79.5495) centre (-53.033, 74.2462) ccw
  arc A45 (-79.5495, 58.3363) -> (-68.9429, 47.7297) centre (-74.2462, 53.033) ccw
  line L45 (-68.9429, 47.7297) -> (-47.7297, 68.9429)
  circle A46 centre (-67.1751, 42.4264) radius 1.6
  circle A47 centre (-42.4264, 67.1751) radius 1.6
  line L46 (-97.5, 15) -> (-97.5, -15)
  arc A48 (-82.5, 15) -> (-97.5, 15) centre (-90, 15) ccw
  arc A49 (-97.5, -15) -> (-82.5, -15) centre (-90, -15) ccw
  line L47 (-82.5, -15) -> (-82.5, 15)
  circle A50 centre (-77.5, -17.5) radius 1.6
  circle A51 centre (-77.5, 17.5) radius 1.6
  line L48 (-79.5495, -58.3363) -> (-58.3363, -79.5495)
  arc A52 (-68.9429, -47.7297) -> (-79.5495, -58.3363) centre (-74.2462, -53.033) ccw
  arc A53 (-58.3363, -79.5495) -> (-47.7297, -68.9429) centre (-53.033, -74.2462) ccw
  line L49 (-47.7297, -68.9429) -> (-68.9429, -47.7297)
  circle A54 centre (-42.4264, -67.1751) radius 1.6
  circle A55 centre (-67.1751, -42.4264) radius 1.6
  line L50 (-15, -97.5) -> (15, -97.5)
  arc A56 (-15, -82.5) -> (-15, -97.5) centre (-15, -90) ccw
  arc A57 (15, -97.5) -> (15, -82.5) centre (15, -90) ccw
  line L51 (15, -82.5) -> (-15, -82.5)
  circle A58 centre (17.5, -77.5) radius 1.6
  circle A59 centre (-17.5, -77.5) radius 1.6
  line L52 (58.3363, -79.5495) -> (79.5495, -58.3363)
  arc A60 (47.7297, -68.9429) -> (58.3363, -79.5495) centre (53.033, -74.2462) ccw
  arc A61 (79.5495, -58.3363) -> (68.9429, -47.7297) centre (74.2462, -53.033) ccw
  line L53 (68.9429, -47.7297) -> (47.7297, -68.9429)
  circle A62 centre (67.1751, -42.4264) radius 1.6
  circle A63 centre (42.4264, -67.1751) radius 1.6
  line L54 (97.5, -15) -> (97.5, 15)
  arc A64 (82.5, -15) -> (97.5, -15) centre (90, -15) ccw
  arc A65 (97.5, 15) -> (82.5, 15) centre (90, 15) ccw
  line L55 (82.5, 15) -> (82.5, -15)
  circle A66 centre (77.5, 17.5) radius 1.6
  circle A67 centre (77.5, -17.5) radius 1.6
  line L56 (79.5495, 58.3363) -> (58.3363, 79.5495)
  arc A68 (68.9429, 47.7297) -> (79.5495, 58.3363) centre (74.2462, 53.033) ccw
  arc A69 (58.3363, 79.5495) -> (47.7297, 68.9429) centre (53.033, 74.2462) ccw
  line L57 (47.7297, 68.9429) -> (68.9429, 47.7297)
  circle A70 centre (42.4264, 67.1751) radius 1.6
  circle A71 centre (67.1751, 42.4264) radius 1.6
  line L58 (67.1751, -42.4264) -> (54.8008, -54.8008) construction
  line L59 (54.8008, -54.8008) -> (53.3866, -56.215) construction
  line L60 (53.3866, -56.215) -> (52.3259, -57.2756) construction
  line L61 (47.7297, -54.8008) -> (54.8008, -61.8718)
  line L62 (54.8008, -61.8718) -> (56.9221, -59.7505)
  line L63 (56.9221, -59.7505) -> (49.851, -52.6795)
  line L64 (49.851, -52.6795) -> (47.7297, -54.8008)
  line L65 (47.7297, -54.8008) -> (56.9221, -59.7505) construction
  line L66 (54.8008, -61.8718) -> (49.851, -52.6795) construction
  line L67 (54.8008, -54.8008) -> (53.7401, -53.7401) construction
  line L68 (59.7505, -56.9221) -> (52.6795, -49.851)
  line L69 (54.8008, -47.7297) -> (61.8718, -54.8008)
  line L70 (52.6795, -49.851) -> (54.8008, -47.7297)
  circle A72 centre (0, 0) radius 75 construction
  circle A73 centre (0, 0) radius 55 construction
  line L71 (-51.9016, 50.6288) -> (-50.6288, 51.9016) construction
  line L72 (-51.2652, 51.2652) -> (-37.8825, 37.8825) construction
  line L73 (-41.295, 40.0222) -> (-37.7595, 36.4867)
  line L74 (-37.7595, 36.4867) -> (-36.4867, 37.7595)
  line L75 (-36.4867, 37.7595) -> (-40.0222, 41.295)
  line L76 (-40.0222, 41.295) -> (-41.295, 40.0222)
  line L77 (-41.295, 40.0222) -> (-36.4867, 37.7595) construction
  line L78 (-37.7595, 36.4867) -> (-40.0222, 41.295) construction
  point P0 (0, 90)
  point P1 (-45.9619, 70.7107)
  point P2 (-82.5, 17.5)
  point P3 (-70.7107, -45.9619)
  point P4 (-17.5, -82.5)
  point P5 (45.9619, -70.7107)
  point P6 (82.5, -17.5)
  point P7 (70.7107, 45.9619)
  point P8 (0, 90)
  point P9 (-45.9619, 70.7107)
  point P10 (-82.5, 17.5)
  point P11 (-70.7107, -45.9619)
  point P12 (-17.5, -82.5)
  point P13 (45.9619, -70.7107)
  point P14 (82.5, -17.5)
  point P15 (70.7107, 45.9619)
  point P16 (45.4935, 0)
  point P17 (26.7551, 33.8262)
  point P18 (-26.7551, 33.8262)
  point P19 (-33.8262, 26.7551)
  point P20 (-33.8262, -26.7551)
  point P21 (-26.7551, -33.8262)
  point P22 (26.7551, -33.8262)
  point P23 (33.8262, -26.7551)
  point P24 (33.8262, 26.7551)
  point P25 (-38.8909, 38.8909)
  dimension "d84" = 110
  dimension "d52" = 220
  dimension "d53" = 215
  dimension "d54" = 9
  dimension "d55" = 25
  dimension "d56" = 10
  dimension "d57" = 22.5
  dimension "d58" = 15
  dimension "d59" = 45
  dimension "d60" = 5
  dimension "d61" = 5
  dimension "d62" = 3.2
  dimension "d63" = 86.1162
  dimension "d64" = 45
  dimension "d65" = 360
  dimension "d66" = 220
  dimension "d67" = 215
  dimension "d68" = 9
  dimension "d69" = 25
  dimension "d70" = 10
  dimension "d71" = 22.5
  dimension "d72" = 15
  dimension "d73" = 45
  dimension "d74" = 5
  dimension "d75" = 5
  dimension "d76" = 3.2
  dimension "d77" = 86.1162
  dimension "d78" = 45
  dimension "d79" = 360
  dimension "d80" = 17.5
  dimension "d81" = 2
  dimension "d82" = 1.5
  dimension "d83" = 150
  dimension "d85" = 5
extrude "Extrusion4" add sketch "Sketch5" along normal mid plane 12 contours L76 L75 L74 L73
ref_plane "Work Plane4" through (-58.9727, 4.5, -57.6999) normal (-0.7071068, 0, 0.7071068) x (0.7071068, 0, 0.7071068)
sketch "Sketch8" plane through (-58.9727, 4.5, -57.6999) normal (-0.7071068, 0, 0.7071068) x (0.7071068, 0, 0.7071068)
  line L0 (10, 0) -> (0, 0) projected
  line L1 (10, -4.5) -> (0, -4.5) projected
  line L2 (10, 0) -> (10, -4.5)
  line L3 (25, 9) -> (30, 9) projected
  line L4 (30, 9) -> (25, 9)
  line L5 (10, -4.5) -> (30, 9)
  line L6 (10, -4.5) -> (17.9179, -4.5) construction
  line L7 (10, 0) -> (12.3461, 0) construction
  line L8 (10, 0) -> (25, 10.125)
  line L9 (10, 0) -> (30, 0) construction
  line L10 (25, 9) -> (25, 21) projected
  line L11 (25, 10.125) -> (25, 9)
  line L12 (25, 9) -> (30, 9)
  point P0 (82.5, -4.5)
  dimension "d92" = 34.019
  dimension "d94" = 34.019
extrude "Extrusion6" add sketch "Sketch8" against normal blind 1.8
fillet "Fillet1" radius 1 4 edges at (-51.2652, 4.5, -51.2652) (-40.6586, 14.625, -40.6586) (-51.2652, 0, -51.2652) (-37.1231, 13.5, -37.1231)
sketch "Sketch9" plane through (0, 25.5, 0) normal (0, 1, 0) x (1, 0, 0)
  line L0 (-36.4867, 37.7595) -> (-40.0222, 41.295) projected
  line L1 (-36.4867, 37.7595) -> (-37.7595, 36.4867)
  line L2 (-51.7223, 50.4496) -> (-38.071, 36.7982) projected
  line L3 (-37.7595, 36.4867) -> (-41.295, 40.0222)
  line L4 (-41.295, 40.0222) -> (-40.0222, 41.295) projected
  line L5 (-40.0222, 41.295) -> (-41.295, 40.0222)
  line L6 (-41.295, 40.0222) -> (-40.0222, 41.295)
  line L7 (-36.7982, 38.071) -> (-50.4496, 51.7223) projected
  line L8 (-40.0222, 41.295) -> (-36.4867, 37.7595)
  point P0 (0, 0)
extrude "Extrusion7" add sketch "Sketch9" along normal blind 6
sketch "Sketch10" plane through (-58.9727, 0, -57.6999) normal (-0.7071068, 0, 0.7071068) x (0.7071068, 0, 0.7071068)
  line L0 (25, 31.5) -> (30, 31.5) projected
  line L1 (27.5, 31.5) -> (27.5, 28.5) construction
  line L2 (27.5, 28.5) -> (27.5, 22.5) construction
  circle A0 centre (27.5, 28.5) radius 1.1
  circle A1 centre (27.5, 22.5) radius 1.1
  point P0 (82.5, 0)
  dimension "d100" = 3
  dimension "d101" = 6
  dimension "d102" = 2.2
  dimension "d103" = 2.2
extrude "Extrusion8" cut sketch "Sketch10" against normal blind 4
properties part number "CarbonConnectorStab"
